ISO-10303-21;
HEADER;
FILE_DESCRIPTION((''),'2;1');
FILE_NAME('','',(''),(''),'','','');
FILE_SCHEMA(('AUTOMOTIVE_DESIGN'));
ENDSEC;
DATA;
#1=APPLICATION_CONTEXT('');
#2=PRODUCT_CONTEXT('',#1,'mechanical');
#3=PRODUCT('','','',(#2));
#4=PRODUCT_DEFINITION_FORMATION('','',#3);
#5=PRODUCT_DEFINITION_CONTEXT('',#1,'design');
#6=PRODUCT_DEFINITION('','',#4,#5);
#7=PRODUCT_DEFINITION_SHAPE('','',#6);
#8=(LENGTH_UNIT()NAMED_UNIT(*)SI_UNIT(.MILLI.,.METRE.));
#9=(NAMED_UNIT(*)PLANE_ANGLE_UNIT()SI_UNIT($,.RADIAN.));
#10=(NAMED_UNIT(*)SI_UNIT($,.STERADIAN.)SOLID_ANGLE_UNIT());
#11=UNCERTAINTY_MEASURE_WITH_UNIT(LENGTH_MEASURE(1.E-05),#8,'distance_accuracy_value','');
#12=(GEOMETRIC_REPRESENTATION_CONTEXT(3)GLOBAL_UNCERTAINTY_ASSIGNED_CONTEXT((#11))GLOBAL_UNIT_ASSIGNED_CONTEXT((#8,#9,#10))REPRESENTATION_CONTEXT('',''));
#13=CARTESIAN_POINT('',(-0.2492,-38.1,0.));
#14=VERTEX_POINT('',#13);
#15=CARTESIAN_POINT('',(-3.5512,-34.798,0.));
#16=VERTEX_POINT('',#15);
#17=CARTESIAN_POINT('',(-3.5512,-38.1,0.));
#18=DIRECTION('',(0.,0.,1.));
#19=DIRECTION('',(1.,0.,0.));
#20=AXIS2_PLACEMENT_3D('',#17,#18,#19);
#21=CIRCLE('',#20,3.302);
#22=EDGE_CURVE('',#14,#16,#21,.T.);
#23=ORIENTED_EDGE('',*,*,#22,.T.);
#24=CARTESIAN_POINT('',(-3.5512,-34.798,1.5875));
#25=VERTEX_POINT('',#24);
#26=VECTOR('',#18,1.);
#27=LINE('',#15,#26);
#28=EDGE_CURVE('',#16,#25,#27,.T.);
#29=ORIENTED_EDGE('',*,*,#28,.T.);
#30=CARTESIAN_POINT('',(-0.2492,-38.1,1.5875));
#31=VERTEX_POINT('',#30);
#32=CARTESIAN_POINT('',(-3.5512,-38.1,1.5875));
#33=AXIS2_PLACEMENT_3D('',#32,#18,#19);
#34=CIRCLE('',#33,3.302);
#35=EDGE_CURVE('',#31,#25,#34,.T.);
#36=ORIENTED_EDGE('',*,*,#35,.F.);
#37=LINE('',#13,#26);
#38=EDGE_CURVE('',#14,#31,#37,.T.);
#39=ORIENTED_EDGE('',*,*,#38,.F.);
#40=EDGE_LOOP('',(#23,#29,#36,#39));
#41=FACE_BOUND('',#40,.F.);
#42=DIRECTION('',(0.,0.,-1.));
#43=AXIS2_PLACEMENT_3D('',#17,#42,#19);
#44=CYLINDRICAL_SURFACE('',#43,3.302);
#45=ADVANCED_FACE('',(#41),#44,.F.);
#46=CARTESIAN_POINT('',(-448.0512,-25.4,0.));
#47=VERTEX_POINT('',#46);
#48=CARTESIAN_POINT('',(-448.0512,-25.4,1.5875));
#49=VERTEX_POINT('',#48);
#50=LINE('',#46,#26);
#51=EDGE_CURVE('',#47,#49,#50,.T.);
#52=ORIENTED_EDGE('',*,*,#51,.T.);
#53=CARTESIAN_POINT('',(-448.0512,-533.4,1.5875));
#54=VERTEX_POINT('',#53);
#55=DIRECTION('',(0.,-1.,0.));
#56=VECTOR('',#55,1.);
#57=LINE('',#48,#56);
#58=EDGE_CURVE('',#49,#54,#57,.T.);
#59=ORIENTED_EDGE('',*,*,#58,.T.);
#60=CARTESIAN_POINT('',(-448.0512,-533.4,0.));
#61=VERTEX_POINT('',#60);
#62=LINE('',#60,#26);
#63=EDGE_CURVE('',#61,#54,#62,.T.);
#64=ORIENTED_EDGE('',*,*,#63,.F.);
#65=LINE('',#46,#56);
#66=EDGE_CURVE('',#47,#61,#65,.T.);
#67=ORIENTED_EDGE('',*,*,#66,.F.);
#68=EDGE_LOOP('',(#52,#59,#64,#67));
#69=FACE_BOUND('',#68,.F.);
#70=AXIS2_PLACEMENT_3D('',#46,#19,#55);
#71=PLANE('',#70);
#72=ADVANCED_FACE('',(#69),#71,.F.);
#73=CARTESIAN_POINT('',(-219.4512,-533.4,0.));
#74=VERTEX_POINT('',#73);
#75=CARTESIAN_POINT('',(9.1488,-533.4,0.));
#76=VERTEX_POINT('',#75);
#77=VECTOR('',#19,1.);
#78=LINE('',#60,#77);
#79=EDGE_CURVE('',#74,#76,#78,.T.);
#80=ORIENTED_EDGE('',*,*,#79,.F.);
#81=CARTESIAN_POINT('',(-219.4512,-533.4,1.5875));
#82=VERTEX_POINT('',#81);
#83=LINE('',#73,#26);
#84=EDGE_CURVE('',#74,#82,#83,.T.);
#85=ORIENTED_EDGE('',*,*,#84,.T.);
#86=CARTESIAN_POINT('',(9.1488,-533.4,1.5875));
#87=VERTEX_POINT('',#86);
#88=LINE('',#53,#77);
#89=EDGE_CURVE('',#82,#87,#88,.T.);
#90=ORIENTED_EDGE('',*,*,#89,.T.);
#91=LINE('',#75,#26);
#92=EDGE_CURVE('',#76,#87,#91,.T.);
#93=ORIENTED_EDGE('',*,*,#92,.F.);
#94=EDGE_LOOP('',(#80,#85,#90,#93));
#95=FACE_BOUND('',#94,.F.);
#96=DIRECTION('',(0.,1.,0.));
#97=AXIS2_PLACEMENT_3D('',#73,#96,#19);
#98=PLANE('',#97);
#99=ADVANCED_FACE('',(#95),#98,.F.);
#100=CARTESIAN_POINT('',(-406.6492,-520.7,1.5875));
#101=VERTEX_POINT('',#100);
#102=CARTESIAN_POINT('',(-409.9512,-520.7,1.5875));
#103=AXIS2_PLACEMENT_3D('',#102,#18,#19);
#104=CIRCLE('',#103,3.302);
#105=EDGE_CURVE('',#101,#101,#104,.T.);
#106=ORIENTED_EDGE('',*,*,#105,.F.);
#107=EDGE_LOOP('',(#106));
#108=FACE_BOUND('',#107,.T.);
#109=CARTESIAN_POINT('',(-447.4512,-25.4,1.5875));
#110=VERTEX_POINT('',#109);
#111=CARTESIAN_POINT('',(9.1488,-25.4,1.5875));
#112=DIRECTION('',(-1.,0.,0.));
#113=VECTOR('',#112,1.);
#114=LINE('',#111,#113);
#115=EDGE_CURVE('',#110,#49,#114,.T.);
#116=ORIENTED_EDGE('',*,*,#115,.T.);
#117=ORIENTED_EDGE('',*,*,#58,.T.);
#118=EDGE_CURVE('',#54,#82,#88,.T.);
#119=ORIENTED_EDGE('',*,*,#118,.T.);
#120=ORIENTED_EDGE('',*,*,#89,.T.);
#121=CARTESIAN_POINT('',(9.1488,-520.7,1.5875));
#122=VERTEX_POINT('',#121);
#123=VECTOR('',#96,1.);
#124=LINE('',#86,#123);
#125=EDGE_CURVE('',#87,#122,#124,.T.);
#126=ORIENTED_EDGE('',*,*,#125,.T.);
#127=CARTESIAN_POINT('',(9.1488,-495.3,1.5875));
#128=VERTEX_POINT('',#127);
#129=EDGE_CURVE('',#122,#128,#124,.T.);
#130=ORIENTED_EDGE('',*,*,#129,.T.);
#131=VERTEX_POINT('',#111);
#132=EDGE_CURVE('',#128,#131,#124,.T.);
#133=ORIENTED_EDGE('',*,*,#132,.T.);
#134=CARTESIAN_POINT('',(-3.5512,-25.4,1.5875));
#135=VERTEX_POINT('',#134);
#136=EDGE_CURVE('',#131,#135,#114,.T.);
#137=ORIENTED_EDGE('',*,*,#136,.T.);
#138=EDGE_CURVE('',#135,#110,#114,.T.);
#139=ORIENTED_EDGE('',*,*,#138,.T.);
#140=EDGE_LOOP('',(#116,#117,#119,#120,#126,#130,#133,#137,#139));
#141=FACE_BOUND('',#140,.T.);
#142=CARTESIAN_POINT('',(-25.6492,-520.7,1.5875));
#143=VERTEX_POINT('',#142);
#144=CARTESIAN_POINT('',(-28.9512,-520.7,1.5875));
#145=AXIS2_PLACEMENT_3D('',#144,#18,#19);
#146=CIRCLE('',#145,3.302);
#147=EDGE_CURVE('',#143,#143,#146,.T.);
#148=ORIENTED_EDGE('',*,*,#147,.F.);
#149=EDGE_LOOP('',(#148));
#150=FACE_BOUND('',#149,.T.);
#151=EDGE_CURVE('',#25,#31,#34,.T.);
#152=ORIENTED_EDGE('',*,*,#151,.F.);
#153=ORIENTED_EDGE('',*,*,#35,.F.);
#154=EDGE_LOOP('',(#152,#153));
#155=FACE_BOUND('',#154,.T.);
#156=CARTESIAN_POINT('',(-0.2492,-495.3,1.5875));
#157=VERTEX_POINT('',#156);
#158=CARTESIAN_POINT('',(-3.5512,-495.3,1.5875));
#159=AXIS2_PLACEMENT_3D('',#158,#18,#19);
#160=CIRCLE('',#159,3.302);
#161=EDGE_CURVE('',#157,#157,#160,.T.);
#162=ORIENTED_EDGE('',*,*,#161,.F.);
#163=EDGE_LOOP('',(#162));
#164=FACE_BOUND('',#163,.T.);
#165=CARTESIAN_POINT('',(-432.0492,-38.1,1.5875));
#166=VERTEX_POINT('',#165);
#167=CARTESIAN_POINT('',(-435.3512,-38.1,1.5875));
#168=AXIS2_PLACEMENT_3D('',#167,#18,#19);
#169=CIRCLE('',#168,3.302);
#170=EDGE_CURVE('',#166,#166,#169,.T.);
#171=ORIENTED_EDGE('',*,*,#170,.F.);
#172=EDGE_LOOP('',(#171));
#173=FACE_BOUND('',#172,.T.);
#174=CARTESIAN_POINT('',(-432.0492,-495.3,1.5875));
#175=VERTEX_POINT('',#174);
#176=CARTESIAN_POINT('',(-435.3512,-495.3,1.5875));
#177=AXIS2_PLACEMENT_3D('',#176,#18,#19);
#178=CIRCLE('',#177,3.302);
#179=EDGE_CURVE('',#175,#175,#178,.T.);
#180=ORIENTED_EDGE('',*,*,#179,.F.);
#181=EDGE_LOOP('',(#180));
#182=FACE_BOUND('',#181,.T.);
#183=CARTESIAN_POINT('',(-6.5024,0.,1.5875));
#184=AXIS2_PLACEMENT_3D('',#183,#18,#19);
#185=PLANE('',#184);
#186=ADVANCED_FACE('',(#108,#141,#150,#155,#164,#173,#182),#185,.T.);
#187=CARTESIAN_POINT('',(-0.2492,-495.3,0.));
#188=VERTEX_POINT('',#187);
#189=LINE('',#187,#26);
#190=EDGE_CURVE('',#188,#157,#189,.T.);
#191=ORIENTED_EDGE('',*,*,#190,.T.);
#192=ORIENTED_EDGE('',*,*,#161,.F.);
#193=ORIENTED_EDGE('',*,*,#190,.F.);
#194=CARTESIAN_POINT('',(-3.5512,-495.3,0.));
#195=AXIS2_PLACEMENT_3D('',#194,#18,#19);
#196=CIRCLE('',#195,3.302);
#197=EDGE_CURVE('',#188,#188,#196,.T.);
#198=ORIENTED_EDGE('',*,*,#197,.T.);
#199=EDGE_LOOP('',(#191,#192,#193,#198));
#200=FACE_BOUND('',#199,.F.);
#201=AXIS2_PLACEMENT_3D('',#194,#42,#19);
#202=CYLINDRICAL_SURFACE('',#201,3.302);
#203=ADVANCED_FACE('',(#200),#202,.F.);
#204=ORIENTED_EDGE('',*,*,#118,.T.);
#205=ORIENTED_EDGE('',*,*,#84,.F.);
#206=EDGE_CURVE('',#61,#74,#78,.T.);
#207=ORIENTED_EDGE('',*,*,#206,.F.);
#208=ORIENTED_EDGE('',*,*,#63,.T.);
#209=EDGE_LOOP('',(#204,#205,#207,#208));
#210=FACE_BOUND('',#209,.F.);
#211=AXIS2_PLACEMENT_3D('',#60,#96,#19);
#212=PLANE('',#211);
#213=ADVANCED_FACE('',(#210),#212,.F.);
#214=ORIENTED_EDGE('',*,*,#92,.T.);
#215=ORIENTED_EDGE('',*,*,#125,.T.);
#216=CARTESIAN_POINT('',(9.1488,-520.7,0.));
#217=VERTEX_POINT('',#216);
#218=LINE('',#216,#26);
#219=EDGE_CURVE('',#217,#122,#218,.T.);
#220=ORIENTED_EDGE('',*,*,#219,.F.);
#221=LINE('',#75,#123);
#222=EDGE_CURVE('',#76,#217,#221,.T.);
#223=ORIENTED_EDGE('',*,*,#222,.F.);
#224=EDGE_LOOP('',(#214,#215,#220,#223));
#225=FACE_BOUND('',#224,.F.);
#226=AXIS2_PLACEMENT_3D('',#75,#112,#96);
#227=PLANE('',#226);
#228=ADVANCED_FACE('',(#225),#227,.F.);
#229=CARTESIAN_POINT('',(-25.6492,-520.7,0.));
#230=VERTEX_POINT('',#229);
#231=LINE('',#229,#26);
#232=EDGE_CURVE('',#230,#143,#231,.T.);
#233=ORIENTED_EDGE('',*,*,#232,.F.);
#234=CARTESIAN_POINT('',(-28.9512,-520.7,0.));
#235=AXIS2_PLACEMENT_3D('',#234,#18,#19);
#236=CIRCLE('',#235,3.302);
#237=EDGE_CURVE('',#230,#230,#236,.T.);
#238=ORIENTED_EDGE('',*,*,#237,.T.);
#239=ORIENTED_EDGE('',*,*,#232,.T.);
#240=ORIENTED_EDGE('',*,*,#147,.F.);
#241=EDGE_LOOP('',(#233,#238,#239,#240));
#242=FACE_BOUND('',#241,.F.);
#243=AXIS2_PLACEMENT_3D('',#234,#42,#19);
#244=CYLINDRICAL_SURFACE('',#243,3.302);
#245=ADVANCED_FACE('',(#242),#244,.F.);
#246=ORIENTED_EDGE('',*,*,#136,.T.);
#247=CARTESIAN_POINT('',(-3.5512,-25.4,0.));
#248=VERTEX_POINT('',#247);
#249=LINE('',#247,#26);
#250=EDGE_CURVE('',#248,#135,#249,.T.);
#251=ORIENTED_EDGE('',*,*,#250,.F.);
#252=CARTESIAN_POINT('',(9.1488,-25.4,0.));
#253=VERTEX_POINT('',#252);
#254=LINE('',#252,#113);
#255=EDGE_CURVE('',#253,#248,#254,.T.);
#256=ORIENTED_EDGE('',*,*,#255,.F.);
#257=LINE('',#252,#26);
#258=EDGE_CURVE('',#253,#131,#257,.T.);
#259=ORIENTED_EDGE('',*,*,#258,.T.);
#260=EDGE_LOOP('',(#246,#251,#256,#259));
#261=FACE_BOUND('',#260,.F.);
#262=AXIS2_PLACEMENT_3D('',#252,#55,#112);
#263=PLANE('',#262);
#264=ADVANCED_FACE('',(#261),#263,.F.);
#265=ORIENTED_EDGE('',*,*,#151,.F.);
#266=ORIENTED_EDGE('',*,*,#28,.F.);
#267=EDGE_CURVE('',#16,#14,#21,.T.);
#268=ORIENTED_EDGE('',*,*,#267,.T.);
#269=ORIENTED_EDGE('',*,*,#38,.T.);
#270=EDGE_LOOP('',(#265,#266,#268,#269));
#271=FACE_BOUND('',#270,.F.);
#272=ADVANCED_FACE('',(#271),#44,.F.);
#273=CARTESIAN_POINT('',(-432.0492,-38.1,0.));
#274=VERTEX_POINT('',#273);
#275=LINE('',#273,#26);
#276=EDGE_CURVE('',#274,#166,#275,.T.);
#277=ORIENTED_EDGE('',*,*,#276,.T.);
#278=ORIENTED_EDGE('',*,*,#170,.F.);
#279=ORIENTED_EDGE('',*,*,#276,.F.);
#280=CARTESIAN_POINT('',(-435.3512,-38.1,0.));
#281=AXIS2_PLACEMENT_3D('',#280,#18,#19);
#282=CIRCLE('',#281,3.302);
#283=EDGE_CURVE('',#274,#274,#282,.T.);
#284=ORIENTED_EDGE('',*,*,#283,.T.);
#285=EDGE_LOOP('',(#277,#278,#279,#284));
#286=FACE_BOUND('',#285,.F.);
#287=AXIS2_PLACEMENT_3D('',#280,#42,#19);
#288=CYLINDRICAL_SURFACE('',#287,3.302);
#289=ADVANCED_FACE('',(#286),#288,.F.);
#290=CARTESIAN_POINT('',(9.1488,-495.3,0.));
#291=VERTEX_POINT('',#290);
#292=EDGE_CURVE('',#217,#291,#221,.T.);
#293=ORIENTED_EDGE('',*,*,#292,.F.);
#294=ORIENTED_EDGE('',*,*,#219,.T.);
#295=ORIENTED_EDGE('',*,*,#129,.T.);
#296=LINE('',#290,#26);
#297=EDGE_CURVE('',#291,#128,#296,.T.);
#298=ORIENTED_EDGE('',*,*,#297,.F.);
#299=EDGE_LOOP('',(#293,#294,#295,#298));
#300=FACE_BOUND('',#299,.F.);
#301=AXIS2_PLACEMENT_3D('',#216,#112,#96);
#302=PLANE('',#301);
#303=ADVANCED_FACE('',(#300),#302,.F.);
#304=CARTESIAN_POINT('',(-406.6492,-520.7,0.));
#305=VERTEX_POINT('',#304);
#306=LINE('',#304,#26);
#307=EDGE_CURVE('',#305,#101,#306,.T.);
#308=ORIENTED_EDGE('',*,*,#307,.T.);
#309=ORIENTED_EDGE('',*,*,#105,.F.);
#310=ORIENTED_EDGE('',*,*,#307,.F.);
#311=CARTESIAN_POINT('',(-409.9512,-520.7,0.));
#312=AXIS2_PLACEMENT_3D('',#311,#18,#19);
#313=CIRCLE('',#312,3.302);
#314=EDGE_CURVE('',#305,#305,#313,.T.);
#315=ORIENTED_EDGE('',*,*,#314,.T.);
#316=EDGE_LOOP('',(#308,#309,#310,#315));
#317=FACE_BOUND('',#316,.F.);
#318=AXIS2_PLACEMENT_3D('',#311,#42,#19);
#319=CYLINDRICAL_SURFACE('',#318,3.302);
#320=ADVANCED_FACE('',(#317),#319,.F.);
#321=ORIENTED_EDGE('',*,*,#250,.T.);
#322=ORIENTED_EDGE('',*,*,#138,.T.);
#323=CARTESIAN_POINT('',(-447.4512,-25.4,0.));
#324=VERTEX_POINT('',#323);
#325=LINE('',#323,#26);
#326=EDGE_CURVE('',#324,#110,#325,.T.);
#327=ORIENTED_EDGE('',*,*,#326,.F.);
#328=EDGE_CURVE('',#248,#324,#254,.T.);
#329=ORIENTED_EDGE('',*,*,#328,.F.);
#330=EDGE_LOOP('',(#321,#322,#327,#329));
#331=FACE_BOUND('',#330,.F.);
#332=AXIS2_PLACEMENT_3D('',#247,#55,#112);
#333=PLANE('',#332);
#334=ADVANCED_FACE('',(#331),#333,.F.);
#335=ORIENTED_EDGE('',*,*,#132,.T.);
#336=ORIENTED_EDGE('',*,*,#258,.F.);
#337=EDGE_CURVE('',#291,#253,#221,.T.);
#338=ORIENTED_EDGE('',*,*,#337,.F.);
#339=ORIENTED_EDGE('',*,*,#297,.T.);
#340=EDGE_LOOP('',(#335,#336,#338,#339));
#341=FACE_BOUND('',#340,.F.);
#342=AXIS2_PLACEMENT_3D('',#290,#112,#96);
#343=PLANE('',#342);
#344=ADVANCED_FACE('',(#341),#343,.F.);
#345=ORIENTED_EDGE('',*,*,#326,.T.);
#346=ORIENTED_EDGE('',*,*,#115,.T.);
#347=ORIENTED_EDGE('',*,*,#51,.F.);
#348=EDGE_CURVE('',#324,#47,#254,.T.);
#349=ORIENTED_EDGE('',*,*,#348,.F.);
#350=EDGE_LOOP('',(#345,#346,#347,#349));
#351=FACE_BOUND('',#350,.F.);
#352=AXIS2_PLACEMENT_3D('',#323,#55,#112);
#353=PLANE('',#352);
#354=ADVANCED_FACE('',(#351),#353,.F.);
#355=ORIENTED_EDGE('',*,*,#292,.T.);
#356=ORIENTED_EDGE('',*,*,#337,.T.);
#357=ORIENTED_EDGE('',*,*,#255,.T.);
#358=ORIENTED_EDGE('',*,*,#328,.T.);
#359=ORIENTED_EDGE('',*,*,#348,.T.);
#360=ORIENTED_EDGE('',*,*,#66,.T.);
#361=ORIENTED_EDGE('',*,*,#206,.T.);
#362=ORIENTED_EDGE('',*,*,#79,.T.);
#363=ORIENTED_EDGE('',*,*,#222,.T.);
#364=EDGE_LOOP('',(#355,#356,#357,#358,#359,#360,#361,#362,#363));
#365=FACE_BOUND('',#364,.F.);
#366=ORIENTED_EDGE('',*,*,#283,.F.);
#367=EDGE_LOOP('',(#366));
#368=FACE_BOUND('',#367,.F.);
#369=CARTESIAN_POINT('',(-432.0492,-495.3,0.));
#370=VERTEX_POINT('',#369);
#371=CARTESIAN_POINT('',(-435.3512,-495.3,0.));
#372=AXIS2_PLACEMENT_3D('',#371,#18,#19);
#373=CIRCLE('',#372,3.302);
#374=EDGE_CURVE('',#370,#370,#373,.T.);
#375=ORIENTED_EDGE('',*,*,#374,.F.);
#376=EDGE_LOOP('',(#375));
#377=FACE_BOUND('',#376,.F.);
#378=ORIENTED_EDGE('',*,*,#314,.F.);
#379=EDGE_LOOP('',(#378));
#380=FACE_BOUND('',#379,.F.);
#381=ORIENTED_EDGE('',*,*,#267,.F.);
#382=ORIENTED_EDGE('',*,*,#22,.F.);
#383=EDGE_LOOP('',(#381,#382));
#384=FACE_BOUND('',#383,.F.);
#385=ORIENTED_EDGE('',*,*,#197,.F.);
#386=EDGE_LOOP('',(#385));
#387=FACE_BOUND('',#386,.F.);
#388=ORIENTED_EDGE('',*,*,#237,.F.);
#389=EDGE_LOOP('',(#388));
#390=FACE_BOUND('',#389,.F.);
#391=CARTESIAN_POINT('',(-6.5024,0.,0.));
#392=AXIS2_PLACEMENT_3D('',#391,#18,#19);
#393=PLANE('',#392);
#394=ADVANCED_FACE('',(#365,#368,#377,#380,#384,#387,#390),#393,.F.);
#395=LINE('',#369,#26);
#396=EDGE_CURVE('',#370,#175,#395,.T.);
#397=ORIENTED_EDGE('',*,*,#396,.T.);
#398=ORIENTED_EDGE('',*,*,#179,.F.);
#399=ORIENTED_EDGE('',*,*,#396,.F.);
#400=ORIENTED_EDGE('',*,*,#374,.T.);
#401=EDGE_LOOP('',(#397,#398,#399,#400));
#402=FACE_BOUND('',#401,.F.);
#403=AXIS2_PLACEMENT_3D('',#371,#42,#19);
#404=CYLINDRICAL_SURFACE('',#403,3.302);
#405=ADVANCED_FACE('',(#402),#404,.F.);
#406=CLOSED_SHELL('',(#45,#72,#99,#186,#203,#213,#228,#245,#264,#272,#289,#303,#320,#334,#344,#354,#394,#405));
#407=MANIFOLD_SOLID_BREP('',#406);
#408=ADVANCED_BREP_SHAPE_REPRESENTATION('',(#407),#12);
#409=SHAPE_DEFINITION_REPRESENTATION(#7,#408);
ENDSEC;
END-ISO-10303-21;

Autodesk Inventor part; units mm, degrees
ref_plane "YZ Plane" through (0, 0, 0) normal (1, 0, 0) x (0, 1, 0)
ref_plane "XZ Plane" through (0, 0, 0) normal (0, 1, 0) x (-1, 0, 0)
ref_plane "XY Plane" through (0, 0, 0) normal (0, 0, 1) x (1, 0, 0)
ref_plane "Work Plane1" through (-6.5024, 0, 0) normal (0, 0, 1) x (1, 0, 0)
sketch "Sketch1" plane through (-6.5024, 0, 0) normal (0, 0, 1) x (1, 0, 0)
  line L0 (15.6512, -12.7) -> (15.6512, -25.4) projected
  line L1 (-440.9488, -12.7) -> (-440.9488, -25.4) projected
  line L2 (15.6512, -25.4) -> (-441.5488, -25.4)
  line L3 (-441.5488, -25.4) -> (-441.5488, -533.4)
  line L4 (-441.5488, -533.4) -> (15.6512, -533.4)
  line L5 (15.6512, -533.4) -> (15.6512, -25.4)
  line L6 (15.6512, -25.4) -> (2.9512, -25.4)
  line L7 (2.9512, -25.4) -> (2.9512, -38.1)
  circle A0 centre (2.9512, -38.1) radius 3.302
  line L8 (15.6512, -533.4) -> (15.6512, -495.3)
  line L9 (15.6512, -495.3) -> (2.9512, -495.3)
  circle A1 centre (2.9512, -495.3) radius 3.302
  line L10 (15.6512, -533.4) -> (15.6512, -520.7)
  line L11 (15.6512, -520.7) -> (-22.4488, -520.7)
  circle A2 centre (-22.4488, -520.7) radius 3.302
  line L12 (15.6512, -533.4) -> (-212.9488, -533.4)
  line L13 (-212.9488, -533.4) -> (-212.9488, -454.8045)
  circle A3 centre (-428.8488, -38.1) radius 3.302
  circle A4 centre (-428.8488, -495.3) radius 3.302
  circle A5 centre (-403.4488, -520.7) radius 3.302
  point P0 (6.5024, 0)
  dimension "d0" = 457.2
  dimension "d1" = 508
  dimension "d2" = 12.7
  dimension "d3" = 12.7
  dimension "d4" = 6.604
  dimension "d5" = 38.1
  dimension "d6" = 12.7
  dimension "d7" = 6.604
  dimension "d8" = 12.7
  dimension "d9" = 38.1
  dimension "d10" = 6.604
  dimension "d11" = 228.6
extrude "Extrusion1" add sketch "Sketch1" along normal blind 1.5875
properties part number "vrRig_v08_enclosure_backPanel"
